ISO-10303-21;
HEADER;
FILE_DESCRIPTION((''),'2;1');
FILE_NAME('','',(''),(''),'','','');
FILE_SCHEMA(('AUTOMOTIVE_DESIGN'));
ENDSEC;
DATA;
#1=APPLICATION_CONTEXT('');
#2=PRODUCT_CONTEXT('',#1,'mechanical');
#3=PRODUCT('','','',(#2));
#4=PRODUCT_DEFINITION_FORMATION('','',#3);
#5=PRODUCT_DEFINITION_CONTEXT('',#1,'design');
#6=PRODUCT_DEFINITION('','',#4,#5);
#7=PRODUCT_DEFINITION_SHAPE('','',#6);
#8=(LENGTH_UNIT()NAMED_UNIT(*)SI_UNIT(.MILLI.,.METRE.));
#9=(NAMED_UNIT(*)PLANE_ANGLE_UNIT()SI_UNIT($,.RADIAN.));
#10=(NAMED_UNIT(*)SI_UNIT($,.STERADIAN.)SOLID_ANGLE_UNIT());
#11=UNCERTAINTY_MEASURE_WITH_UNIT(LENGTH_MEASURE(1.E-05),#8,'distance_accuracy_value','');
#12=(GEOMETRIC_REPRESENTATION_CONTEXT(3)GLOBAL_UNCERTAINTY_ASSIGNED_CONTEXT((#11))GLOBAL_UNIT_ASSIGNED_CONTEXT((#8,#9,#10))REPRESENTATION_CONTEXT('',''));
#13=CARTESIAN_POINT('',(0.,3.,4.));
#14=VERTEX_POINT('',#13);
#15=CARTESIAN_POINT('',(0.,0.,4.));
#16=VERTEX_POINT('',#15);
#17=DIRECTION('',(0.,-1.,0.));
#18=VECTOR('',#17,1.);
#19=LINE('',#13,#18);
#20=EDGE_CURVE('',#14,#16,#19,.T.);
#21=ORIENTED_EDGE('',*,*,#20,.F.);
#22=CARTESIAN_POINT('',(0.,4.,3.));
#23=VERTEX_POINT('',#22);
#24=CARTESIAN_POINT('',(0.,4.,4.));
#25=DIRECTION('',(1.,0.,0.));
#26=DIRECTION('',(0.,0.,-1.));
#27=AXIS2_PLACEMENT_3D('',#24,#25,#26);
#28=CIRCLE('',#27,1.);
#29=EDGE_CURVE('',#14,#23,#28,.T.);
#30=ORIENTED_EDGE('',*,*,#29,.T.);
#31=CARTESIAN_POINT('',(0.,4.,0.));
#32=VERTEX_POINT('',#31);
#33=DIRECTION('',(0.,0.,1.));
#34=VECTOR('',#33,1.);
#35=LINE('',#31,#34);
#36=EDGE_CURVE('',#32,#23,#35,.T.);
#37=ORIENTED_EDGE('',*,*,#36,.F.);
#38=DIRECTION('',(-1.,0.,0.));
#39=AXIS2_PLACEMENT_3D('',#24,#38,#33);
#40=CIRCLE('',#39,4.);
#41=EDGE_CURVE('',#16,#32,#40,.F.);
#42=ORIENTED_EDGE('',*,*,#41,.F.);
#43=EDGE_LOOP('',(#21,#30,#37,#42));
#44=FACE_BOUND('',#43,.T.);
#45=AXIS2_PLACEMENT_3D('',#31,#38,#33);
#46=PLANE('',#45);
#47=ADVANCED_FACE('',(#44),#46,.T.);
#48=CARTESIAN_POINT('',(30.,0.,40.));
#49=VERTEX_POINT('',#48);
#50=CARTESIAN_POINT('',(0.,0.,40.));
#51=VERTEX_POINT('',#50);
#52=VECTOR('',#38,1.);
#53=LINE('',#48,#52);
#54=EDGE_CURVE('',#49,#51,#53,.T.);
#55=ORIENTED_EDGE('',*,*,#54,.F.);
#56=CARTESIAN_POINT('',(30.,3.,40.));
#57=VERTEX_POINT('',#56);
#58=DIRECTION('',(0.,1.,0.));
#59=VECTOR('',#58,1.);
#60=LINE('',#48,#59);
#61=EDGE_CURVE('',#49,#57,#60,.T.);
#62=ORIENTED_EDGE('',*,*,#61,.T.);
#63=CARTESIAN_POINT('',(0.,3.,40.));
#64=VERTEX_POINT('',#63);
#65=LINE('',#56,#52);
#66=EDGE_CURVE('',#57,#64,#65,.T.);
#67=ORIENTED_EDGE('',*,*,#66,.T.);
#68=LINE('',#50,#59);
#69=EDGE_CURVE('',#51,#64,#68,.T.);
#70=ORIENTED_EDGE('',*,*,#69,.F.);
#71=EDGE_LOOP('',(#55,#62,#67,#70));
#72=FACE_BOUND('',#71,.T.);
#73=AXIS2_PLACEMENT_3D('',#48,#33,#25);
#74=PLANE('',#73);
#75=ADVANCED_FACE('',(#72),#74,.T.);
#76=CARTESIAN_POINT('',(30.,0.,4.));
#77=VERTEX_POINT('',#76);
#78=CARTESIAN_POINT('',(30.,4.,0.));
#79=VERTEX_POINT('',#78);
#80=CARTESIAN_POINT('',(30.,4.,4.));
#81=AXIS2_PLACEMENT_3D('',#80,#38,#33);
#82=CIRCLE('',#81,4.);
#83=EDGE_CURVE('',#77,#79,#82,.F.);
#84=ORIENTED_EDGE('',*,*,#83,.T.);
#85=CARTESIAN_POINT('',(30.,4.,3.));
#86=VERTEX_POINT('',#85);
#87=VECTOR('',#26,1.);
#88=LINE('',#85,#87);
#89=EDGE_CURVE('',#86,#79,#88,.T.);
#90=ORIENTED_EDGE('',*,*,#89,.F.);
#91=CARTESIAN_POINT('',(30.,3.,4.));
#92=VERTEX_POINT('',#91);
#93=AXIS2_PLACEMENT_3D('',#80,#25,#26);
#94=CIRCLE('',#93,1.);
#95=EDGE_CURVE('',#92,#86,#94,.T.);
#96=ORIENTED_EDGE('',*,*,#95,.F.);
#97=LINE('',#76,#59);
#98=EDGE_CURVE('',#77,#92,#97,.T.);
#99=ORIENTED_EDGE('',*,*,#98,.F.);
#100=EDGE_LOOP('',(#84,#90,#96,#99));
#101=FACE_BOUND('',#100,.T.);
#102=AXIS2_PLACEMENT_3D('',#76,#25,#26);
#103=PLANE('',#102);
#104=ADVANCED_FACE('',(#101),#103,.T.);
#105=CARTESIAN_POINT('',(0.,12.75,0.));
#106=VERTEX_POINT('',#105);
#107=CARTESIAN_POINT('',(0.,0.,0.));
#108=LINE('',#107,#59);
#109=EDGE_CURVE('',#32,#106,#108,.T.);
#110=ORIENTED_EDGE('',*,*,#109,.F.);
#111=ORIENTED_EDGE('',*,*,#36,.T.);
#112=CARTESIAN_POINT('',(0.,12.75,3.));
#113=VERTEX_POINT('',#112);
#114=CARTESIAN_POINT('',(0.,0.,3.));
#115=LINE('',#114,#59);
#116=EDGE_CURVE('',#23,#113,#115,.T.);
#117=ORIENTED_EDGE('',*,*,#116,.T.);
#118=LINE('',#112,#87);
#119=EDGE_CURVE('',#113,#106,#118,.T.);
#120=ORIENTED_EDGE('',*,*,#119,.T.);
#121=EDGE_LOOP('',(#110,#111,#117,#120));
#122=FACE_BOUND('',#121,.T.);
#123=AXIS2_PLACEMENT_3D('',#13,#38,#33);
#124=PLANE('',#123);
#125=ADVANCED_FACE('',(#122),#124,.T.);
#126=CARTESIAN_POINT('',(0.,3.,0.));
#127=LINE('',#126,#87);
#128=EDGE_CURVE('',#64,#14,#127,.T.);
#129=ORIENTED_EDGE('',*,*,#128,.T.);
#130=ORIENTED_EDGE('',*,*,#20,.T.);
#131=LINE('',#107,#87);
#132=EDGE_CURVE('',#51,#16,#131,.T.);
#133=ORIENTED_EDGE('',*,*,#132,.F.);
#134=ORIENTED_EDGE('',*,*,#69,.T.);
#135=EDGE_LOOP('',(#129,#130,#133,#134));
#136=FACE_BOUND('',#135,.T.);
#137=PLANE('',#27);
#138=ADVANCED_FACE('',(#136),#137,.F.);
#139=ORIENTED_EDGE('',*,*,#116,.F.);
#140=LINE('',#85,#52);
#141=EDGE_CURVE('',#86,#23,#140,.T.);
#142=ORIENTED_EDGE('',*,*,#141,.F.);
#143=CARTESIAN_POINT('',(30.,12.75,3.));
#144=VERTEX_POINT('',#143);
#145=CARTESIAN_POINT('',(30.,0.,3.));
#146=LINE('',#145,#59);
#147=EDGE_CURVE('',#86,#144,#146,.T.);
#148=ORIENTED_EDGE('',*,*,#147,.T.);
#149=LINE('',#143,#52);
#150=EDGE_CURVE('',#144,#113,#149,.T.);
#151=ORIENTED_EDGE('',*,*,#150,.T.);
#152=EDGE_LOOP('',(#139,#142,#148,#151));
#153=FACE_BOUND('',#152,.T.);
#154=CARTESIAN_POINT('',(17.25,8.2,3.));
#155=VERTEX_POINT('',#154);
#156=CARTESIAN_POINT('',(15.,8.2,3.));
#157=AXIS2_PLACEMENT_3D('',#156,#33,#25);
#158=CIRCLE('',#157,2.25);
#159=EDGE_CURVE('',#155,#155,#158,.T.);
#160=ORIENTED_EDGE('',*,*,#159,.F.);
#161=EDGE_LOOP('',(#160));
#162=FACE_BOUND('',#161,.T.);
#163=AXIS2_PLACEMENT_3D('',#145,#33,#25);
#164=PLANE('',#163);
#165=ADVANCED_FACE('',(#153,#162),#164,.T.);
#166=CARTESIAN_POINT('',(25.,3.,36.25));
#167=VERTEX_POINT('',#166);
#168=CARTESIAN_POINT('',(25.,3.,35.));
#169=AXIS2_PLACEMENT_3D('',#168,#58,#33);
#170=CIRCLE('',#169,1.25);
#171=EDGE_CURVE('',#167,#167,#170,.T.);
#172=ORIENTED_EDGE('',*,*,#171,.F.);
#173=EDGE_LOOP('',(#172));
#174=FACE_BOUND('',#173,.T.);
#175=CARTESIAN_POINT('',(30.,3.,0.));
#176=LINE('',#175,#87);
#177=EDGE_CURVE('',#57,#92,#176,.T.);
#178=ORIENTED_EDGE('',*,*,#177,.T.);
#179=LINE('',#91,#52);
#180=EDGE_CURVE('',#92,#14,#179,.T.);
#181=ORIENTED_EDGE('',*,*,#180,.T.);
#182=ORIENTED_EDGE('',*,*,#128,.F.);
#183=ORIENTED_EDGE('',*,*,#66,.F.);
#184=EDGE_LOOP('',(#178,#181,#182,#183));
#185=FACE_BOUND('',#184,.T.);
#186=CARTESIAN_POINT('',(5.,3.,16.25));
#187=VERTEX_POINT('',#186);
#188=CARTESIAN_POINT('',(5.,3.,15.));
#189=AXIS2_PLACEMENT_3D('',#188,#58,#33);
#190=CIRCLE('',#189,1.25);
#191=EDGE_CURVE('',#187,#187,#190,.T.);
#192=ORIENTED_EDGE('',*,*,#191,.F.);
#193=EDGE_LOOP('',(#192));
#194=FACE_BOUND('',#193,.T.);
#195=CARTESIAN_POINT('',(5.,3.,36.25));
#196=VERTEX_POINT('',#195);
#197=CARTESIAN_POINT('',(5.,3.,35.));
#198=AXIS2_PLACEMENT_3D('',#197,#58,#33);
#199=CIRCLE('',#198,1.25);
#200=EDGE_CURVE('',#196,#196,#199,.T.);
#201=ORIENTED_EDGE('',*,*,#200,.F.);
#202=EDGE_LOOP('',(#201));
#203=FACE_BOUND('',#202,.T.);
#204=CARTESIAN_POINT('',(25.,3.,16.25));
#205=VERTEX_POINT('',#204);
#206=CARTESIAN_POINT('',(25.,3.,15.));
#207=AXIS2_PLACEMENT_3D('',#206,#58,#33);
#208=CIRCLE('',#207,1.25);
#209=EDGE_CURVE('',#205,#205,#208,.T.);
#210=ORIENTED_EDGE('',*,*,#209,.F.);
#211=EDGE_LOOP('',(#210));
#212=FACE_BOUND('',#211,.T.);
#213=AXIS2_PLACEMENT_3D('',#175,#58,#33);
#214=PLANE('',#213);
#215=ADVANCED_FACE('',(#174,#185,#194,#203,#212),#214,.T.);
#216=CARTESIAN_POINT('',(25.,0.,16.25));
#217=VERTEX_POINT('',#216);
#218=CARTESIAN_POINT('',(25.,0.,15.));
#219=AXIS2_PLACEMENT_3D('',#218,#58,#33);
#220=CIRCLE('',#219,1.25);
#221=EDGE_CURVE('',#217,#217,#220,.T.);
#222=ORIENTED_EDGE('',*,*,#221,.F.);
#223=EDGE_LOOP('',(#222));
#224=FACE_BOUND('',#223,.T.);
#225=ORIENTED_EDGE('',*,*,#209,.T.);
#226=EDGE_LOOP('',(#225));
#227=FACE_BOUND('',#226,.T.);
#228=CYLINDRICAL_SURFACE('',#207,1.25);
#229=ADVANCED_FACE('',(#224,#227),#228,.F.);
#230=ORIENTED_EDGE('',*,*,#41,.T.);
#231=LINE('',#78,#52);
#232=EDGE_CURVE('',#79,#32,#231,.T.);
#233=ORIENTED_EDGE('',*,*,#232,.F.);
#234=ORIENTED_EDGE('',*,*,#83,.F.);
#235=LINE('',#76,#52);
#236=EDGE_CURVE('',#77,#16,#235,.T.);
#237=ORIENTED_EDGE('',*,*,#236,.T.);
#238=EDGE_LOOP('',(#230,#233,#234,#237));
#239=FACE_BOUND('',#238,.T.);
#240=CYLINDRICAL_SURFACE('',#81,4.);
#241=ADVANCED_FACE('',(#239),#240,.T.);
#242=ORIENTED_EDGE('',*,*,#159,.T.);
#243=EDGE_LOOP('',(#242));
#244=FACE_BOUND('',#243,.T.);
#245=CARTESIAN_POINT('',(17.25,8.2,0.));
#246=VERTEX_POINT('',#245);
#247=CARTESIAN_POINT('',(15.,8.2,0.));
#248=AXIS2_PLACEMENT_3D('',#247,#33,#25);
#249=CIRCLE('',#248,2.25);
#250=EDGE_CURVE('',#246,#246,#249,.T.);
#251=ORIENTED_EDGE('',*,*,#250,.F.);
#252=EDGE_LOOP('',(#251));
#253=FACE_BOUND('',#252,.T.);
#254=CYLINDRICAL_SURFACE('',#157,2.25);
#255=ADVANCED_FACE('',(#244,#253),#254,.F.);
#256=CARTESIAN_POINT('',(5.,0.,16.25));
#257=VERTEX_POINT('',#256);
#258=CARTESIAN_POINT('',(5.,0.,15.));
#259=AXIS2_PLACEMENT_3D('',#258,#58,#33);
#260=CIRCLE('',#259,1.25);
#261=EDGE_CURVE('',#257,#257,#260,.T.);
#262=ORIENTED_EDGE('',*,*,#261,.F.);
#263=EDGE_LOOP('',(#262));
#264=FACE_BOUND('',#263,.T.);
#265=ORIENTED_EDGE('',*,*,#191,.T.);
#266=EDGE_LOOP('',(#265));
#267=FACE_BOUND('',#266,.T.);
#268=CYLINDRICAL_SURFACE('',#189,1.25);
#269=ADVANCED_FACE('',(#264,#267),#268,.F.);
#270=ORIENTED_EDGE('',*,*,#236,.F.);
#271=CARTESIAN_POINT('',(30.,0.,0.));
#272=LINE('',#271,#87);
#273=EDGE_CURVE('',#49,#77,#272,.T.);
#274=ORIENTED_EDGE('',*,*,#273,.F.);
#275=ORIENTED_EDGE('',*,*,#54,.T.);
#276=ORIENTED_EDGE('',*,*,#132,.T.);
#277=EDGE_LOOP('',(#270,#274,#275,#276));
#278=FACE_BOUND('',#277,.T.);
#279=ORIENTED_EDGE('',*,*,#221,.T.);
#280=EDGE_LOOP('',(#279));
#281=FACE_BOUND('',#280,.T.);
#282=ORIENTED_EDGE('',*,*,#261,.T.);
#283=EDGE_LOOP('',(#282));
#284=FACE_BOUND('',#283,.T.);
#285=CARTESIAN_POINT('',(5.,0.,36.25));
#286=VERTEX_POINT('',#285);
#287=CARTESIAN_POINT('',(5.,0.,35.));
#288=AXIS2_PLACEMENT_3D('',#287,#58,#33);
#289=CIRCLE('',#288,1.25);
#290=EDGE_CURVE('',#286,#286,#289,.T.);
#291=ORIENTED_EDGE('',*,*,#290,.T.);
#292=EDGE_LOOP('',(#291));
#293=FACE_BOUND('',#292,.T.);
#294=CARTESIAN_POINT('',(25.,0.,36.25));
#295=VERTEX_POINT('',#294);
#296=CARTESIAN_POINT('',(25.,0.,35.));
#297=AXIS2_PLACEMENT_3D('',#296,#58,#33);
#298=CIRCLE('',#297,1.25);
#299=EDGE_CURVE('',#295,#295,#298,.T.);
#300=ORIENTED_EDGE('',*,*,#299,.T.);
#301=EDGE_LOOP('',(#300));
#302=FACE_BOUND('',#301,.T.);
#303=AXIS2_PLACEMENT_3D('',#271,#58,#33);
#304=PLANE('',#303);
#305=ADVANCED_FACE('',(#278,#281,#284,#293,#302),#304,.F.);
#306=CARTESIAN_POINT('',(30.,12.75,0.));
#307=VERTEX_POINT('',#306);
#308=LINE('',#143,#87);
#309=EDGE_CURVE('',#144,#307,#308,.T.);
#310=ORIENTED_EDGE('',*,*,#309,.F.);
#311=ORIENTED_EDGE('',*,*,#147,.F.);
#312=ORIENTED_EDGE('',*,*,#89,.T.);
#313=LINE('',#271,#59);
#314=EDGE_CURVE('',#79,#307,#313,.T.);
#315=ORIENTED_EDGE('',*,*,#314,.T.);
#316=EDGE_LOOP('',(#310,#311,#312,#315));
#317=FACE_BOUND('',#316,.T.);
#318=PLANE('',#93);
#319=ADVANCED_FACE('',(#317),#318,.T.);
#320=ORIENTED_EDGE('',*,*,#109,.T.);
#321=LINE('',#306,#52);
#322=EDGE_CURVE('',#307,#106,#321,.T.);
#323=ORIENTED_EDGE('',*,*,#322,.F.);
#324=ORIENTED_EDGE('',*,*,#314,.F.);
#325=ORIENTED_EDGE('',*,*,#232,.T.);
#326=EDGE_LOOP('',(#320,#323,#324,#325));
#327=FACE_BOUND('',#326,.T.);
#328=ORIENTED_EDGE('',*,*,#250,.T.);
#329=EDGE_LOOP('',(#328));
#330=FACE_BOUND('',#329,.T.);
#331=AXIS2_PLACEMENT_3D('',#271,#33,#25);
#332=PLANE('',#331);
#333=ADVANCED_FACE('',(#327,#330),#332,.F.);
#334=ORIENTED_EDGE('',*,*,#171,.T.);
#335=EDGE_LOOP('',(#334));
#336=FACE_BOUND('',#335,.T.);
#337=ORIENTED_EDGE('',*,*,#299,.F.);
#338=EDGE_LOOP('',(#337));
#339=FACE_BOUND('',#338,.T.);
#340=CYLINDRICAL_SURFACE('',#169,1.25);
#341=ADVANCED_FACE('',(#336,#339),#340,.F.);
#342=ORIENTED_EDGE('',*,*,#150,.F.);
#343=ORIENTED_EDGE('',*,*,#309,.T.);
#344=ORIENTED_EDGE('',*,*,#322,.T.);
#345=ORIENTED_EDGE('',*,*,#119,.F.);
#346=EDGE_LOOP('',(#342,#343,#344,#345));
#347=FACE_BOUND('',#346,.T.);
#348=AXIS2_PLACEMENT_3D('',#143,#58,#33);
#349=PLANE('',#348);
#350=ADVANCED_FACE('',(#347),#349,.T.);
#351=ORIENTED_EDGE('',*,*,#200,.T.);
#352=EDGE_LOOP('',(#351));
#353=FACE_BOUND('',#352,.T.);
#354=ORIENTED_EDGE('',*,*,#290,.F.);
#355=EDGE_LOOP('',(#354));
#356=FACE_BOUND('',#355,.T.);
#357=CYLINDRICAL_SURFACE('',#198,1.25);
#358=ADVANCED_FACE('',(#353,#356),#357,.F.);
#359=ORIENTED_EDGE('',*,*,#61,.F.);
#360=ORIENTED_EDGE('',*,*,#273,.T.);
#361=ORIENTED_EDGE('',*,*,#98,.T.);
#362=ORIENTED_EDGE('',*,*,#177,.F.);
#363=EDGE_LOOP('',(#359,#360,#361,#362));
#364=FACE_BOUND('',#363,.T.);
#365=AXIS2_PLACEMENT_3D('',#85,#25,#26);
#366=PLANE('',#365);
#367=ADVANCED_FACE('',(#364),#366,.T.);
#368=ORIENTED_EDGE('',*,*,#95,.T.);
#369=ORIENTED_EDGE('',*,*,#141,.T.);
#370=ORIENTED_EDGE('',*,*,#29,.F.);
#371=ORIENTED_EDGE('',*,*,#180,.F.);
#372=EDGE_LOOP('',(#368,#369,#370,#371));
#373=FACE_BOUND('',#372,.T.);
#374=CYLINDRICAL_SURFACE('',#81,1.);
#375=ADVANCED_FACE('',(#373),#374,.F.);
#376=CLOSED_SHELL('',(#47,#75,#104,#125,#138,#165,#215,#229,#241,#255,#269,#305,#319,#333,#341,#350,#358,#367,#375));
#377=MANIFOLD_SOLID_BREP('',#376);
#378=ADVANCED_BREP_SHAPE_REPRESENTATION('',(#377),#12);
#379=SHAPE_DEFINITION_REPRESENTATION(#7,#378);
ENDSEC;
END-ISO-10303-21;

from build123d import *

# Parameters (mm, degrees)
T_LE_DE_BASE_PLI_E1_DEPTH = 30
TROU_TARAUD_M31_D         = 2.5
D_GAGEMENT_M41_D          = 4.5


# Sheet-metal steps are written as plain solids
with BuildPart() as part:
    # Esquisse1 → Tôle de base pliée1 (new body)
    with BuildSketch(Plane(origin=(0, 0, 0), x_dir=(0, 0, -1), z_dir=(1, 0, 0))):
        with BuildLine():
            Line((0, 12.75), (0, 4))
            ThreePointArc((0, 4), (-1.171572875, 1.171572875), (-4, 0))
            Line((-4, 0), (-40, 0))
            Line((-40, 0), (-40, 3))
            Line((-40, 3), (-4, 3))
            ThreePointArc((-4, 3), (-3.292893219, 3.292893219), (-3, 4))
            Line((-3, 4), (-3, 12.75))
            Line((-3, 12.75), (0, 12.75))
        make_face()
    extrude(amount=T_LE_DE_BASE_PLI_E1_DEPTH)

    # Trou taraudé M31 (through all)
    with Locations(Plane(origin=(0, 3, 0), x_dir=(1, 0, 0), z_dir=(0, 1, 0))):
        with Locations((5, -35), (5, -15), (25, -15), (25, -35)):
            Hole(TROU_TARAUD_M31_D / 2)

    # Dégagement M41 (through all)
    with Locations(Plane.XY.offset(3)):
        with Locations((15, 8.2)):
            Hole(D_GAGEMENT_M41_D / 2)


solid = part.part
